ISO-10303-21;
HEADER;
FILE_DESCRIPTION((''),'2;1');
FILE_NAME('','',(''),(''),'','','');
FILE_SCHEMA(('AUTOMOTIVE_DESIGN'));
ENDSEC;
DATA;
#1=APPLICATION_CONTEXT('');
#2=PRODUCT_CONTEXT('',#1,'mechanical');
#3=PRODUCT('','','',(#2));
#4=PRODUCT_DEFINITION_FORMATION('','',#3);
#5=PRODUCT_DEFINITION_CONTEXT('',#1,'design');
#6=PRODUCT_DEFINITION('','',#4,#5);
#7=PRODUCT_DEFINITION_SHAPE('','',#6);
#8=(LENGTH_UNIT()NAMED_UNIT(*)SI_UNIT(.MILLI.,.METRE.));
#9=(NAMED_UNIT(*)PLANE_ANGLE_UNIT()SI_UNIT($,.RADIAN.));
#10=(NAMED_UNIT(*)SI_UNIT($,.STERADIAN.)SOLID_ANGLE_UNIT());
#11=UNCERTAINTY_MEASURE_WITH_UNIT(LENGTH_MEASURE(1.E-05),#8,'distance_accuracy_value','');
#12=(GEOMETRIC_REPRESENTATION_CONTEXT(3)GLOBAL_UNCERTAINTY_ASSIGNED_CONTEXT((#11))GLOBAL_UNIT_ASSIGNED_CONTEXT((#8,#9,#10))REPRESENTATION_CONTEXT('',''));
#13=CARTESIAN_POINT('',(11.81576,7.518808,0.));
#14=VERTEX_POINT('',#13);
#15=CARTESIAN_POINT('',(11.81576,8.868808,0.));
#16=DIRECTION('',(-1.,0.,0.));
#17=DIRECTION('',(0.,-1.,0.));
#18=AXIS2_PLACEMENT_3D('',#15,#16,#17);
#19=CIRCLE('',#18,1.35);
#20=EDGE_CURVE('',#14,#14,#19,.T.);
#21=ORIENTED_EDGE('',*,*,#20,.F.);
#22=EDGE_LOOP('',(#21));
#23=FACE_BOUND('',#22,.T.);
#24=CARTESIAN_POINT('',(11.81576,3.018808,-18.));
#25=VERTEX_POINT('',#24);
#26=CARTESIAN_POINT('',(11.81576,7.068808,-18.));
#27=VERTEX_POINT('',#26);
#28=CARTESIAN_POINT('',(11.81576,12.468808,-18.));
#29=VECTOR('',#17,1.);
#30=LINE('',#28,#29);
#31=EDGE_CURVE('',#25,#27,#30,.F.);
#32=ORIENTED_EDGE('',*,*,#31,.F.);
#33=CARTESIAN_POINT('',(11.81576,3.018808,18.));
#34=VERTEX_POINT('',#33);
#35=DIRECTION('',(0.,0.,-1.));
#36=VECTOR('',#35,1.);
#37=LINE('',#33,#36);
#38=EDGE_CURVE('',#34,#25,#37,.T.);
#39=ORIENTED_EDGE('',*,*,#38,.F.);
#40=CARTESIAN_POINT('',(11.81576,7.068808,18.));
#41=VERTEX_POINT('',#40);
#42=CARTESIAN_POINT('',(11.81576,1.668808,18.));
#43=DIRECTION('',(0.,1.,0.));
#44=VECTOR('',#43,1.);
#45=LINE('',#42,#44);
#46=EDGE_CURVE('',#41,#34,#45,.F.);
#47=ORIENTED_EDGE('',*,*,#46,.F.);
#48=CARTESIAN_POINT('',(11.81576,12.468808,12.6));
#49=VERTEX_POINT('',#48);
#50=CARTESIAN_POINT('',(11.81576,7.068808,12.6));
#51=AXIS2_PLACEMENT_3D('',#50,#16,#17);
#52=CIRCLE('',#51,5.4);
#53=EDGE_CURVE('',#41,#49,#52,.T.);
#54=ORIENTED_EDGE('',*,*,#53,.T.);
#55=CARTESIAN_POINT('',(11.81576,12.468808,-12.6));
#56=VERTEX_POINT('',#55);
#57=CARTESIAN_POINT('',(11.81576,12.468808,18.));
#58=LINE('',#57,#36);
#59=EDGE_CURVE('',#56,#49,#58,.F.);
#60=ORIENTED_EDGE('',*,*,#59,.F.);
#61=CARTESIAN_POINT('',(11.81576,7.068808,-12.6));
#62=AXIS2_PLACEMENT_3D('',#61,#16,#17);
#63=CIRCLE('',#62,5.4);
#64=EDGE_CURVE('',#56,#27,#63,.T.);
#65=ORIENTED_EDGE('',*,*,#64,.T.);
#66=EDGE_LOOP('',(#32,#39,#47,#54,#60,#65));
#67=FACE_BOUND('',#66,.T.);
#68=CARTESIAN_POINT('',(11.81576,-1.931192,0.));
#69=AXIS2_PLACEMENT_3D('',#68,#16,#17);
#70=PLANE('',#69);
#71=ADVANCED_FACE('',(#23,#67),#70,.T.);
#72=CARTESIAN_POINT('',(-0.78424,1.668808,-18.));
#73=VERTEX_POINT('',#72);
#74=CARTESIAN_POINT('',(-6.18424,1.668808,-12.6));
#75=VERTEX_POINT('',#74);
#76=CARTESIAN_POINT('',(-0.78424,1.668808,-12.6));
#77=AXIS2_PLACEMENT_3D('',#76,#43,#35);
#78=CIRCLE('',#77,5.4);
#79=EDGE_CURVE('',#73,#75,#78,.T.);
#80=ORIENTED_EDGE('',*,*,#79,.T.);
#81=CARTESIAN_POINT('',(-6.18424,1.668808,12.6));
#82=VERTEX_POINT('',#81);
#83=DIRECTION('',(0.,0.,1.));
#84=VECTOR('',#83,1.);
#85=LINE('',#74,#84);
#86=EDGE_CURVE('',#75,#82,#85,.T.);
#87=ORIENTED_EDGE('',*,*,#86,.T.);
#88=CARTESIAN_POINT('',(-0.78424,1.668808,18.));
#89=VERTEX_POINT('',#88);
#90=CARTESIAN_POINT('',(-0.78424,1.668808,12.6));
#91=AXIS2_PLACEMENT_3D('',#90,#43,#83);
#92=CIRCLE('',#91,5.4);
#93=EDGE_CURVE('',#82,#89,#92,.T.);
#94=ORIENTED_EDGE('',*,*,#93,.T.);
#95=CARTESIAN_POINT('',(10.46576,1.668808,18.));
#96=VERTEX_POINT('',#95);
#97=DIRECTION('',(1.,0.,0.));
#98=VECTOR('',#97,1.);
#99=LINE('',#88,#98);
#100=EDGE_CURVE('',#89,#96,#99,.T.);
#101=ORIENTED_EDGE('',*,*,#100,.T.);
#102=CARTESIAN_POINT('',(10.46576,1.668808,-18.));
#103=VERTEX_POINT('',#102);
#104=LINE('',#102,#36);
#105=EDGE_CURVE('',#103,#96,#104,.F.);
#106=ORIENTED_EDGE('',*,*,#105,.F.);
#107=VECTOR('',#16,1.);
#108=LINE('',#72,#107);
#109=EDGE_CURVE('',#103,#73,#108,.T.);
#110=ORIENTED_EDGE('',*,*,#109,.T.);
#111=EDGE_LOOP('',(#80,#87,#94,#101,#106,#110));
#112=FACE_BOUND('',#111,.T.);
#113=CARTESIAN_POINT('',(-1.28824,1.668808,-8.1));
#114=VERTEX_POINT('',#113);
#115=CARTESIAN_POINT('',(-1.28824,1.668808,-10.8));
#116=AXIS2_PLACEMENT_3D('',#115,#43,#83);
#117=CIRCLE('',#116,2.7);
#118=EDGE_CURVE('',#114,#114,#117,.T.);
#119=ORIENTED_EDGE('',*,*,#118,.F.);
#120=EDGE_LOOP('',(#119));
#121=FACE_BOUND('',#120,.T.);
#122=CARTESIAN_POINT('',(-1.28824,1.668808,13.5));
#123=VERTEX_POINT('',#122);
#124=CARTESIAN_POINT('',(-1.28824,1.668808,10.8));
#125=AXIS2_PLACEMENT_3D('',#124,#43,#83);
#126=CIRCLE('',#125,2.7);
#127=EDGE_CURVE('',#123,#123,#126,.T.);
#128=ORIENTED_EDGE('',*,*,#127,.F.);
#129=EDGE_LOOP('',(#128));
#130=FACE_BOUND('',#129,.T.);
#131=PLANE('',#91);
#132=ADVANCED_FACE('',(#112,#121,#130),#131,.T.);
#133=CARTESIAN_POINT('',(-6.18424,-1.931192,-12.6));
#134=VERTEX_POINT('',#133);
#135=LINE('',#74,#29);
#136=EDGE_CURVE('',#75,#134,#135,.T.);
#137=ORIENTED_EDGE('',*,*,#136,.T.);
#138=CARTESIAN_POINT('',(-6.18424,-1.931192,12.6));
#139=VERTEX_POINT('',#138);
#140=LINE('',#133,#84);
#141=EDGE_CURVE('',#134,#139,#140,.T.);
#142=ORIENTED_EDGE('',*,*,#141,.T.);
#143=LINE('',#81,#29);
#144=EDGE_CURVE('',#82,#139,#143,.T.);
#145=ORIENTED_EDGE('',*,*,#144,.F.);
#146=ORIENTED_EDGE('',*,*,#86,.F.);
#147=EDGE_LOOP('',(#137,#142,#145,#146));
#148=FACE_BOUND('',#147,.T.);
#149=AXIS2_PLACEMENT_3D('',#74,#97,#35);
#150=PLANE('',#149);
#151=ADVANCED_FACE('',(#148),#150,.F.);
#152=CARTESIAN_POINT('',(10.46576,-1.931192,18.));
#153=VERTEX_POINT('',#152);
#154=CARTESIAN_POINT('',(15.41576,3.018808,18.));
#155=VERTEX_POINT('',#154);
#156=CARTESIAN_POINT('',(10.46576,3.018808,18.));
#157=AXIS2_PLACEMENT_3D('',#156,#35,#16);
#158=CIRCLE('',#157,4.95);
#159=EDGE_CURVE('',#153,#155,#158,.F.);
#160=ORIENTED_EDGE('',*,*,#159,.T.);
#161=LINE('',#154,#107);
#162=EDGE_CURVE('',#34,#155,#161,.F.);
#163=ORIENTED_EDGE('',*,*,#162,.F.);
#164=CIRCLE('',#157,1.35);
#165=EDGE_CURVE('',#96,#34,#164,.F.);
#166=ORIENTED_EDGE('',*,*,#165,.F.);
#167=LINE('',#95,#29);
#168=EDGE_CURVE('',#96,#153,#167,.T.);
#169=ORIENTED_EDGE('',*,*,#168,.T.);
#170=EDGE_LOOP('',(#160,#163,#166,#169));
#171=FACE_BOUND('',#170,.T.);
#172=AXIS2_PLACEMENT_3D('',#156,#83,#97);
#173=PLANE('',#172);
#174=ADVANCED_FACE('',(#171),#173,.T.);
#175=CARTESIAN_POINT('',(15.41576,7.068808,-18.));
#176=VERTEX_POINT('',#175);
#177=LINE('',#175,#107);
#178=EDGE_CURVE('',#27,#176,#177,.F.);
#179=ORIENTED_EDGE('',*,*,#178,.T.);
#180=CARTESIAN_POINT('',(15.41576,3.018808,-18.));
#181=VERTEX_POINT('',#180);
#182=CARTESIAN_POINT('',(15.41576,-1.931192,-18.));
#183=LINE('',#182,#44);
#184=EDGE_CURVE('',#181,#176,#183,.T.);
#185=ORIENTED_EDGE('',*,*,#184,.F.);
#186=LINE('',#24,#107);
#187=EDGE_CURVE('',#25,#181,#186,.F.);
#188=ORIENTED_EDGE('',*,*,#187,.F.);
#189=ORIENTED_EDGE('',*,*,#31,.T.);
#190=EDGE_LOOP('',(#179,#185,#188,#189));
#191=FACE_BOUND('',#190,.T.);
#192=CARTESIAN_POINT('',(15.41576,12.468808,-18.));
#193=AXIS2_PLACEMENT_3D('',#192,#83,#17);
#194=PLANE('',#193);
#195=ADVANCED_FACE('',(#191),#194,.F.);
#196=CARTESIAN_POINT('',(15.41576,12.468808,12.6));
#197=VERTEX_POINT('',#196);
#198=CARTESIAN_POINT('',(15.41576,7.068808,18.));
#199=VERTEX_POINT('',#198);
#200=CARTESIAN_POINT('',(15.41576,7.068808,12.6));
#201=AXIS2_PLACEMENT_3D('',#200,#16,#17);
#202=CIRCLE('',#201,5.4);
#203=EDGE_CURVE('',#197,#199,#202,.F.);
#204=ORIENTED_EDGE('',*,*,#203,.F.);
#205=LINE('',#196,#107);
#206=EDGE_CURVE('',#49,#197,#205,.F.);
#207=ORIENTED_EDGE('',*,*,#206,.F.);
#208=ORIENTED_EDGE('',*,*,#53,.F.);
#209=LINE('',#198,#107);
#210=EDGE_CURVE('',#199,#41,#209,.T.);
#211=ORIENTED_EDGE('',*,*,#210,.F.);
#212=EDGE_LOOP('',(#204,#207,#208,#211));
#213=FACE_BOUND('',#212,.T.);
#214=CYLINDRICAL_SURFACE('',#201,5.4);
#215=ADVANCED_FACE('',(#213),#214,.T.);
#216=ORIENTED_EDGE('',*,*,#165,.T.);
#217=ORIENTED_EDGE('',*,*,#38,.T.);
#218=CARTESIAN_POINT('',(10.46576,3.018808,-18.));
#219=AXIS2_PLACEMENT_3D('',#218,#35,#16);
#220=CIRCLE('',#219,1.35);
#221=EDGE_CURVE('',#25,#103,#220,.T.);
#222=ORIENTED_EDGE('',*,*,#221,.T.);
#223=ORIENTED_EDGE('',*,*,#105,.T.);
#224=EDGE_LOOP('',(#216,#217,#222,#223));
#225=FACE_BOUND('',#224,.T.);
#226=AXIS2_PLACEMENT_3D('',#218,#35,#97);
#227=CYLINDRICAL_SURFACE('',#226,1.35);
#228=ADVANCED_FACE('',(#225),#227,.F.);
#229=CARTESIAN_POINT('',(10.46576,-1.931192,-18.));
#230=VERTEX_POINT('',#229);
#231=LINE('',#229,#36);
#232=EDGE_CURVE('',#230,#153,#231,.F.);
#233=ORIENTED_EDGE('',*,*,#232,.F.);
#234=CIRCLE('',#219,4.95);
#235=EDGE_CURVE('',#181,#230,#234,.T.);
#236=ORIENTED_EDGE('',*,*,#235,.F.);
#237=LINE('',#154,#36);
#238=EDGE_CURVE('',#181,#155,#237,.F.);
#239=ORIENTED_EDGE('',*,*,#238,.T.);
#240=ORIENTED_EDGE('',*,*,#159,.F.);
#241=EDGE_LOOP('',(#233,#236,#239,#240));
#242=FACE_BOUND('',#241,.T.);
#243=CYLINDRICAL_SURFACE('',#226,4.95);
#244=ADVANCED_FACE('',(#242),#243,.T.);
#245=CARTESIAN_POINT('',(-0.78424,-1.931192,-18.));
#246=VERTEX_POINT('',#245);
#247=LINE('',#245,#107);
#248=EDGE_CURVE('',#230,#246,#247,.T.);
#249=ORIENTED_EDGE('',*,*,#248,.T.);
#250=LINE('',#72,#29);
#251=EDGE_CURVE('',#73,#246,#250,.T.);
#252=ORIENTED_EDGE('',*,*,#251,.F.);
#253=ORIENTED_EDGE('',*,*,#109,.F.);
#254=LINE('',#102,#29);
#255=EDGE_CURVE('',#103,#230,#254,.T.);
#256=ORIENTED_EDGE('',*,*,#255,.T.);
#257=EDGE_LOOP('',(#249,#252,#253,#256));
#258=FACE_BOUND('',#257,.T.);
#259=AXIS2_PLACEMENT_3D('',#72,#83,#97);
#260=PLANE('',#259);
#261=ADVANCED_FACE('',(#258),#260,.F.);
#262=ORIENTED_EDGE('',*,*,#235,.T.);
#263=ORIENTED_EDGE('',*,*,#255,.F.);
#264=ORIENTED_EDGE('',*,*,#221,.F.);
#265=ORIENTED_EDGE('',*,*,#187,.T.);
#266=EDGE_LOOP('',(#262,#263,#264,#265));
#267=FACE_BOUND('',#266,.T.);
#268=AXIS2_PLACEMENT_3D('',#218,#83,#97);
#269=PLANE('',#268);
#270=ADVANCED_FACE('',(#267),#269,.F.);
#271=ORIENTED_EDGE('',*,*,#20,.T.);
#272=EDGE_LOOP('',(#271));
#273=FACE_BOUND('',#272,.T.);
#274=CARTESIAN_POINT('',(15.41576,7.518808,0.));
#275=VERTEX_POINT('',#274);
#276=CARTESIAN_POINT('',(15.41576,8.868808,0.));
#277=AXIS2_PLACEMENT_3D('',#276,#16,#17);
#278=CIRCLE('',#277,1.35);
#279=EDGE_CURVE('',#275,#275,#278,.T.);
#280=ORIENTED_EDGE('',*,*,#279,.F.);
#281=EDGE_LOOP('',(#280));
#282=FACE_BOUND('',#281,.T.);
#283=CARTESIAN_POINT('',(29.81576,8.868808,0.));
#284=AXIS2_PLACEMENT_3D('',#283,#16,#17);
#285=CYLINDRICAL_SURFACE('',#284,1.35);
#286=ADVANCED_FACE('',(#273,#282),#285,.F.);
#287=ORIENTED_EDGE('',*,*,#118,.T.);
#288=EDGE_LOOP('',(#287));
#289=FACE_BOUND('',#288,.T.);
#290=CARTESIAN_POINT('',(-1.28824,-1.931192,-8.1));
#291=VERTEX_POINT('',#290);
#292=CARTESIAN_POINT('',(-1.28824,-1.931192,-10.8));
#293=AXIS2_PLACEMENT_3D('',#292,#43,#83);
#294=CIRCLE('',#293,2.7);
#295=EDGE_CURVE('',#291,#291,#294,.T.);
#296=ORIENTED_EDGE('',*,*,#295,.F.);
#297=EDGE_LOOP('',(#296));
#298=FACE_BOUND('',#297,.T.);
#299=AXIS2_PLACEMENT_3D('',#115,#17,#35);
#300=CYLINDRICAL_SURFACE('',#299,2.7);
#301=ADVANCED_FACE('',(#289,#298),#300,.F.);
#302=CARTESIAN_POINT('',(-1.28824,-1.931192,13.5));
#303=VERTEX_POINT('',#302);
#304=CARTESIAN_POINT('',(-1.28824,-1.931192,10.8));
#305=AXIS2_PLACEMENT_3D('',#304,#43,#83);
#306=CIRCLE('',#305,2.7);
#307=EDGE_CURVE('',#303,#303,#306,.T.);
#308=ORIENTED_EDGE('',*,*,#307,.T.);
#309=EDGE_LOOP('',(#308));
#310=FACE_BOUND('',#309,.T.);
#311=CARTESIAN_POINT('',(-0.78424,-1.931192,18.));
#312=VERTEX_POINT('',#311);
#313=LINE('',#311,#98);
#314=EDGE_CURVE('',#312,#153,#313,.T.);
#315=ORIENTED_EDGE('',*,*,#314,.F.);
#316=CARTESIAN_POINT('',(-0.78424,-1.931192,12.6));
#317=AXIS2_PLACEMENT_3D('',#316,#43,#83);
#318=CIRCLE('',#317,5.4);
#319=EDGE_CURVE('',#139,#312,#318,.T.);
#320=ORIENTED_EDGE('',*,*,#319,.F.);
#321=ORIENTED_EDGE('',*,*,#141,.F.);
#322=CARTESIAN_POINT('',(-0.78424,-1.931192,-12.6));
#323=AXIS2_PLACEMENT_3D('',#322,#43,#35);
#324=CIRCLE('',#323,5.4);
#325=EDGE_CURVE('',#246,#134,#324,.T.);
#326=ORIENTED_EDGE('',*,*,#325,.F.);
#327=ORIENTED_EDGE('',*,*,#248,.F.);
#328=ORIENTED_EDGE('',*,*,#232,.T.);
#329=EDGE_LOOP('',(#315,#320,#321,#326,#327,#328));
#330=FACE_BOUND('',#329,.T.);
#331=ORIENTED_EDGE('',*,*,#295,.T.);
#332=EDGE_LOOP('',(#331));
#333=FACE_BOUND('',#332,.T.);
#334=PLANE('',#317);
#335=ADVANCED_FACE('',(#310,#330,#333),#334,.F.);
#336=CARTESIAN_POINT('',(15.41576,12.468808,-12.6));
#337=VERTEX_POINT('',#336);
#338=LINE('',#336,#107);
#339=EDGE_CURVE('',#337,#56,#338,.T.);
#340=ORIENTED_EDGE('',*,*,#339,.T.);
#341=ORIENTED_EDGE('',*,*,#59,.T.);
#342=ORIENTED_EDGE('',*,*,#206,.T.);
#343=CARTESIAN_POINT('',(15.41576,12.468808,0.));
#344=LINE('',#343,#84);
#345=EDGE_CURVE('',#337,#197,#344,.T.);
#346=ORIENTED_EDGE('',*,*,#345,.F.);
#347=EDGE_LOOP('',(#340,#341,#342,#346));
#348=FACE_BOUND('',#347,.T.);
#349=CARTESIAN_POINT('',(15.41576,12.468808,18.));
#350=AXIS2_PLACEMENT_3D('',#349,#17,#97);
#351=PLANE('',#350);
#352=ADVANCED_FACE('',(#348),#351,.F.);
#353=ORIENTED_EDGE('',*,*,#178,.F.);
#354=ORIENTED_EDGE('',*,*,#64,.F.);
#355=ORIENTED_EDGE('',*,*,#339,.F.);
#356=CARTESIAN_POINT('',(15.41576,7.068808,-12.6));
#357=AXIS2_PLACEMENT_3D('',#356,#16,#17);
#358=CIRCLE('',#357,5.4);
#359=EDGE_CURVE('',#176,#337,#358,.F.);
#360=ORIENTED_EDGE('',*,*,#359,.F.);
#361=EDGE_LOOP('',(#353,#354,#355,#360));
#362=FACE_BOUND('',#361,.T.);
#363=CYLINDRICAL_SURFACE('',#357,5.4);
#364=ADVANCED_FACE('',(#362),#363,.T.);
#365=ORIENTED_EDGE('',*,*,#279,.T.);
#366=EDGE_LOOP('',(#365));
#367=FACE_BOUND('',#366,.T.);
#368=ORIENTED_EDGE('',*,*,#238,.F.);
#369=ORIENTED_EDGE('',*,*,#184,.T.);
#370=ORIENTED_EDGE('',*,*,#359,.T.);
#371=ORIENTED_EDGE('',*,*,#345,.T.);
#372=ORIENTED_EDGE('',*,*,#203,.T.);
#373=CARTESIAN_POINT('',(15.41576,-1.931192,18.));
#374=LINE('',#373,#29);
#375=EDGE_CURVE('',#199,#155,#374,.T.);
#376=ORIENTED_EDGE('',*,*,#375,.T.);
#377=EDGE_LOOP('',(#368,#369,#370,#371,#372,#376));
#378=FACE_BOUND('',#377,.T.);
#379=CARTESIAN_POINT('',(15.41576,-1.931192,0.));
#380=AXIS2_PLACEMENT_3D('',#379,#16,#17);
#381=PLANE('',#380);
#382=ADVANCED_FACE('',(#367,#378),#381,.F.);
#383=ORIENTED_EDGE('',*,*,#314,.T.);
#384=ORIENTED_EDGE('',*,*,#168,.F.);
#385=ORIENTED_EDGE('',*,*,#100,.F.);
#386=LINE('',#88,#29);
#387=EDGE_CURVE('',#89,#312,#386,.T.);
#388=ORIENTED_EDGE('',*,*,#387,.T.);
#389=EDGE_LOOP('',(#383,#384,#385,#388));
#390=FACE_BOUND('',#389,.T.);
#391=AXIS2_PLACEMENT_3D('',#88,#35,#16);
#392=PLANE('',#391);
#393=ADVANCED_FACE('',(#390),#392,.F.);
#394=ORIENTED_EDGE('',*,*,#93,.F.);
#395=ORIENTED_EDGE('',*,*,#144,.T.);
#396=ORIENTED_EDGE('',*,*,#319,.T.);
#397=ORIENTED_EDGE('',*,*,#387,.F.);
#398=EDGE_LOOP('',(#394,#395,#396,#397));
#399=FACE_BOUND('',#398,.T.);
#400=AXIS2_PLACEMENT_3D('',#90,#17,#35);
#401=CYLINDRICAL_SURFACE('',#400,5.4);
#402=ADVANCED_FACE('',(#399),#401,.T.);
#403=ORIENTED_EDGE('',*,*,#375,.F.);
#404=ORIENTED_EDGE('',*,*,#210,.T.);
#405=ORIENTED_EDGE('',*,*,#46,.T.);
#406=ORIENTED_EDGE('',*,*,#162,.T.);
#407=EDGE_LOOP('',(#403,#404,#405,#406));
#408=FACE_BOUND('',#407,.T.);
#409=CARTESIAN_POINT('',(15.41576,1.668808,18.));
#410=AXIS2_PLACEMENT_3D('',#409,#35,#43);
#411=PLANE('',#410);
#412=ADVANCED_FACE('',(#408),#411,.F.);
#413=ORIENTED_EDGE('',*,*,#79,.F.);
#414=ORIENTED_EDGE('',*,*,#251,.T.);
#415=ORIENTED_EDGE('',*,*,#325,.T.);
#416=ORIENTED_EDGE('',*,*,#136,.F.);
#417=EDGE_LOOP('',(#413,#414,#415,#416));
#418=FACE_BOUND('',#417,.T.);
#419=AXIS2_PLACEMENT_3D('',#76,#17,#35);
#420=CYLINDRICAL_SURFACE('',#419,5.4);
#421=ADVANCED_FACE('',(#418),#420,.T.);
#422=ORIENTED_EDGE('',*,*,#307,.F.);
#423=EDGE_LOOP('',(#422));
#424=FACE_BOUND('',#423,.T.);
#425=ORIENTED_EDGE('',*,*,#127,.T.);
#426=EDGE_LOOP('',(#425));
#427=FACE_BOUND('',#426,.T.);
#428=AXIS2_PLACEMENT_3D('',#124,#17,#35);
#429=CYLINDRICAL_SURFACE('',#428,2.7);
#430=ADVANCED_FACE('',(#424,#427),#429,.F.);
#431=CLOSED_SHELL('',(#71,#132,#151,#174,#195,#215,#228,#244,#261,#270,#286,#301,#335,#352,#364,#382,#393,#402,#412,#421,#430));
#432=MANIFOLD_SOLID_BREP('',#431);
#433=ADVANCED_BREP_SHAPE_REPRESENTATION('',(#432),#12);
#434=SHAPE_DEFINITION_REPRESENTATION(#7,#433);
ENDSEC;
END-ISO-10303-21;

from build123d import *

# Parameters (mm, degrees)
SKETCH1_R                    = 1.5
BASE_FLANGE1_DEPTH           = 2
EDGE_FLANGE1_STRIP_W         = 9.5
EDGE_FLANGE1_STRIP_H         = 2
EDGE_FLANGE1_STRIP_CUT_DEPTH = 20
EDGE_FLANGE1_DEPTH           = 20
SKETCH9_R                    = 0.75
CUT_EXTRUDE1_DEPTH           = 10
FILLET1_R                    = 3
SCALE1_SCALE                 = 1.8


# Sheet-metal steps are written as plain solids
with BuildPart() as part:
    # Sketch1 → Base-Flange1 (new body)
    with BuildSketch(Plane(origin=(0, 0, 0), x_dir=(1, 0, 0), z_dir=(0, 1, 0))):
        with BuildLine():
            Line((0, 7), (0, -7))
            ThreePointArc((0, -7), (0.878679656, -9.121320344), (3, -10))
            Line((3, -10), (12, -10))
            Line((12, -10), (12, 10))
            Line((12, 10), (3, 10))
            ThreePointArc((3, 10), (0.878679656, 9.121320344), (0, 7))
        make_face()
        with Locations(Location((2.72, 6, 0), (0, 0, 270))):
            Circle(SKETCH1_R, mode=Mode.SUBTRACT)
        with Locations(Location((2.72, -6, 0), (0, 0, 270))):
            Circle(SKETCH1_R, mode=Mode.SUBTRACT)
    extrude(amount=BASE_FLANGE1_DEPTH)

    # Edge-Flange1 strip (across the edge) → Edge-Flange1 strip cut (cut)
    with BuildSketch(Plane(origin=(12, 2, 10), x_dir=(-1, 0, 0), z_dir=(0, 0, -1))):
        with Locations((-2, -1)):
            Rectangle(EDGE_FLANGE1_STRIP_W, EDGE_FLANGE1_STRIP_H)
    extrude(amount=EDGE_FLANGE1_STRIP_CUT_DEPTH, mode=Mode.SUBTRACT)

    # Edge-Flange1 section (across the edge) → Edge-Flange1 (add)
    with BuildSketch(Plane(origin=(12, 2, 10), x_dir=(-1, 0, 0), z_dir=(0, 0, -1))):
        with BuildLine():
            Line((0, 0.75), (0, 6))
            Line((0, 6), (2, 6))
            Line((2, 6), (2, 0.75))
            ThreePointArc((2, 0.75), (2.219669914, 0.219669914), (2.75, 0))
            Line((2.75, 0), (2.75, -2))
            ThreePointArc((2.75, -2), (0.805456352, -1.194543648), (0, 0.75))
        make_face()
    extrude(amount=EDGE_FLANGE1_DEPTH)

    # Sketch9 → Cut-Extrude1 (cut)
    with BuildSketch(Plane.ZY.offset(-10)):
        with Locations(Location((0, 6, 0), (0, 0, 270))):
            Circle(SKETCH9_R)
    extrude(amount=-CUT_EXTRUDE1_DEPTH, mode=Mode.SUBTRACT)

    # Fillet1
    fillet1_edges = [part.edges().sort_by_distance(p)[0] for p in [
        (11, 8, 10),
        (11, 8, -10),
    ]]
    fillet(fillet1_edges, radius=FILLET1_R)


with BuildPart() as part_1:
    # Scale1: scaled about (7.730300008, 2.413989503, 0)
    add(part.part.scale(SCALE1_SCALE).moved(Location((-6.184240006, -1.931191602, 0))))


solid = part_1.part
